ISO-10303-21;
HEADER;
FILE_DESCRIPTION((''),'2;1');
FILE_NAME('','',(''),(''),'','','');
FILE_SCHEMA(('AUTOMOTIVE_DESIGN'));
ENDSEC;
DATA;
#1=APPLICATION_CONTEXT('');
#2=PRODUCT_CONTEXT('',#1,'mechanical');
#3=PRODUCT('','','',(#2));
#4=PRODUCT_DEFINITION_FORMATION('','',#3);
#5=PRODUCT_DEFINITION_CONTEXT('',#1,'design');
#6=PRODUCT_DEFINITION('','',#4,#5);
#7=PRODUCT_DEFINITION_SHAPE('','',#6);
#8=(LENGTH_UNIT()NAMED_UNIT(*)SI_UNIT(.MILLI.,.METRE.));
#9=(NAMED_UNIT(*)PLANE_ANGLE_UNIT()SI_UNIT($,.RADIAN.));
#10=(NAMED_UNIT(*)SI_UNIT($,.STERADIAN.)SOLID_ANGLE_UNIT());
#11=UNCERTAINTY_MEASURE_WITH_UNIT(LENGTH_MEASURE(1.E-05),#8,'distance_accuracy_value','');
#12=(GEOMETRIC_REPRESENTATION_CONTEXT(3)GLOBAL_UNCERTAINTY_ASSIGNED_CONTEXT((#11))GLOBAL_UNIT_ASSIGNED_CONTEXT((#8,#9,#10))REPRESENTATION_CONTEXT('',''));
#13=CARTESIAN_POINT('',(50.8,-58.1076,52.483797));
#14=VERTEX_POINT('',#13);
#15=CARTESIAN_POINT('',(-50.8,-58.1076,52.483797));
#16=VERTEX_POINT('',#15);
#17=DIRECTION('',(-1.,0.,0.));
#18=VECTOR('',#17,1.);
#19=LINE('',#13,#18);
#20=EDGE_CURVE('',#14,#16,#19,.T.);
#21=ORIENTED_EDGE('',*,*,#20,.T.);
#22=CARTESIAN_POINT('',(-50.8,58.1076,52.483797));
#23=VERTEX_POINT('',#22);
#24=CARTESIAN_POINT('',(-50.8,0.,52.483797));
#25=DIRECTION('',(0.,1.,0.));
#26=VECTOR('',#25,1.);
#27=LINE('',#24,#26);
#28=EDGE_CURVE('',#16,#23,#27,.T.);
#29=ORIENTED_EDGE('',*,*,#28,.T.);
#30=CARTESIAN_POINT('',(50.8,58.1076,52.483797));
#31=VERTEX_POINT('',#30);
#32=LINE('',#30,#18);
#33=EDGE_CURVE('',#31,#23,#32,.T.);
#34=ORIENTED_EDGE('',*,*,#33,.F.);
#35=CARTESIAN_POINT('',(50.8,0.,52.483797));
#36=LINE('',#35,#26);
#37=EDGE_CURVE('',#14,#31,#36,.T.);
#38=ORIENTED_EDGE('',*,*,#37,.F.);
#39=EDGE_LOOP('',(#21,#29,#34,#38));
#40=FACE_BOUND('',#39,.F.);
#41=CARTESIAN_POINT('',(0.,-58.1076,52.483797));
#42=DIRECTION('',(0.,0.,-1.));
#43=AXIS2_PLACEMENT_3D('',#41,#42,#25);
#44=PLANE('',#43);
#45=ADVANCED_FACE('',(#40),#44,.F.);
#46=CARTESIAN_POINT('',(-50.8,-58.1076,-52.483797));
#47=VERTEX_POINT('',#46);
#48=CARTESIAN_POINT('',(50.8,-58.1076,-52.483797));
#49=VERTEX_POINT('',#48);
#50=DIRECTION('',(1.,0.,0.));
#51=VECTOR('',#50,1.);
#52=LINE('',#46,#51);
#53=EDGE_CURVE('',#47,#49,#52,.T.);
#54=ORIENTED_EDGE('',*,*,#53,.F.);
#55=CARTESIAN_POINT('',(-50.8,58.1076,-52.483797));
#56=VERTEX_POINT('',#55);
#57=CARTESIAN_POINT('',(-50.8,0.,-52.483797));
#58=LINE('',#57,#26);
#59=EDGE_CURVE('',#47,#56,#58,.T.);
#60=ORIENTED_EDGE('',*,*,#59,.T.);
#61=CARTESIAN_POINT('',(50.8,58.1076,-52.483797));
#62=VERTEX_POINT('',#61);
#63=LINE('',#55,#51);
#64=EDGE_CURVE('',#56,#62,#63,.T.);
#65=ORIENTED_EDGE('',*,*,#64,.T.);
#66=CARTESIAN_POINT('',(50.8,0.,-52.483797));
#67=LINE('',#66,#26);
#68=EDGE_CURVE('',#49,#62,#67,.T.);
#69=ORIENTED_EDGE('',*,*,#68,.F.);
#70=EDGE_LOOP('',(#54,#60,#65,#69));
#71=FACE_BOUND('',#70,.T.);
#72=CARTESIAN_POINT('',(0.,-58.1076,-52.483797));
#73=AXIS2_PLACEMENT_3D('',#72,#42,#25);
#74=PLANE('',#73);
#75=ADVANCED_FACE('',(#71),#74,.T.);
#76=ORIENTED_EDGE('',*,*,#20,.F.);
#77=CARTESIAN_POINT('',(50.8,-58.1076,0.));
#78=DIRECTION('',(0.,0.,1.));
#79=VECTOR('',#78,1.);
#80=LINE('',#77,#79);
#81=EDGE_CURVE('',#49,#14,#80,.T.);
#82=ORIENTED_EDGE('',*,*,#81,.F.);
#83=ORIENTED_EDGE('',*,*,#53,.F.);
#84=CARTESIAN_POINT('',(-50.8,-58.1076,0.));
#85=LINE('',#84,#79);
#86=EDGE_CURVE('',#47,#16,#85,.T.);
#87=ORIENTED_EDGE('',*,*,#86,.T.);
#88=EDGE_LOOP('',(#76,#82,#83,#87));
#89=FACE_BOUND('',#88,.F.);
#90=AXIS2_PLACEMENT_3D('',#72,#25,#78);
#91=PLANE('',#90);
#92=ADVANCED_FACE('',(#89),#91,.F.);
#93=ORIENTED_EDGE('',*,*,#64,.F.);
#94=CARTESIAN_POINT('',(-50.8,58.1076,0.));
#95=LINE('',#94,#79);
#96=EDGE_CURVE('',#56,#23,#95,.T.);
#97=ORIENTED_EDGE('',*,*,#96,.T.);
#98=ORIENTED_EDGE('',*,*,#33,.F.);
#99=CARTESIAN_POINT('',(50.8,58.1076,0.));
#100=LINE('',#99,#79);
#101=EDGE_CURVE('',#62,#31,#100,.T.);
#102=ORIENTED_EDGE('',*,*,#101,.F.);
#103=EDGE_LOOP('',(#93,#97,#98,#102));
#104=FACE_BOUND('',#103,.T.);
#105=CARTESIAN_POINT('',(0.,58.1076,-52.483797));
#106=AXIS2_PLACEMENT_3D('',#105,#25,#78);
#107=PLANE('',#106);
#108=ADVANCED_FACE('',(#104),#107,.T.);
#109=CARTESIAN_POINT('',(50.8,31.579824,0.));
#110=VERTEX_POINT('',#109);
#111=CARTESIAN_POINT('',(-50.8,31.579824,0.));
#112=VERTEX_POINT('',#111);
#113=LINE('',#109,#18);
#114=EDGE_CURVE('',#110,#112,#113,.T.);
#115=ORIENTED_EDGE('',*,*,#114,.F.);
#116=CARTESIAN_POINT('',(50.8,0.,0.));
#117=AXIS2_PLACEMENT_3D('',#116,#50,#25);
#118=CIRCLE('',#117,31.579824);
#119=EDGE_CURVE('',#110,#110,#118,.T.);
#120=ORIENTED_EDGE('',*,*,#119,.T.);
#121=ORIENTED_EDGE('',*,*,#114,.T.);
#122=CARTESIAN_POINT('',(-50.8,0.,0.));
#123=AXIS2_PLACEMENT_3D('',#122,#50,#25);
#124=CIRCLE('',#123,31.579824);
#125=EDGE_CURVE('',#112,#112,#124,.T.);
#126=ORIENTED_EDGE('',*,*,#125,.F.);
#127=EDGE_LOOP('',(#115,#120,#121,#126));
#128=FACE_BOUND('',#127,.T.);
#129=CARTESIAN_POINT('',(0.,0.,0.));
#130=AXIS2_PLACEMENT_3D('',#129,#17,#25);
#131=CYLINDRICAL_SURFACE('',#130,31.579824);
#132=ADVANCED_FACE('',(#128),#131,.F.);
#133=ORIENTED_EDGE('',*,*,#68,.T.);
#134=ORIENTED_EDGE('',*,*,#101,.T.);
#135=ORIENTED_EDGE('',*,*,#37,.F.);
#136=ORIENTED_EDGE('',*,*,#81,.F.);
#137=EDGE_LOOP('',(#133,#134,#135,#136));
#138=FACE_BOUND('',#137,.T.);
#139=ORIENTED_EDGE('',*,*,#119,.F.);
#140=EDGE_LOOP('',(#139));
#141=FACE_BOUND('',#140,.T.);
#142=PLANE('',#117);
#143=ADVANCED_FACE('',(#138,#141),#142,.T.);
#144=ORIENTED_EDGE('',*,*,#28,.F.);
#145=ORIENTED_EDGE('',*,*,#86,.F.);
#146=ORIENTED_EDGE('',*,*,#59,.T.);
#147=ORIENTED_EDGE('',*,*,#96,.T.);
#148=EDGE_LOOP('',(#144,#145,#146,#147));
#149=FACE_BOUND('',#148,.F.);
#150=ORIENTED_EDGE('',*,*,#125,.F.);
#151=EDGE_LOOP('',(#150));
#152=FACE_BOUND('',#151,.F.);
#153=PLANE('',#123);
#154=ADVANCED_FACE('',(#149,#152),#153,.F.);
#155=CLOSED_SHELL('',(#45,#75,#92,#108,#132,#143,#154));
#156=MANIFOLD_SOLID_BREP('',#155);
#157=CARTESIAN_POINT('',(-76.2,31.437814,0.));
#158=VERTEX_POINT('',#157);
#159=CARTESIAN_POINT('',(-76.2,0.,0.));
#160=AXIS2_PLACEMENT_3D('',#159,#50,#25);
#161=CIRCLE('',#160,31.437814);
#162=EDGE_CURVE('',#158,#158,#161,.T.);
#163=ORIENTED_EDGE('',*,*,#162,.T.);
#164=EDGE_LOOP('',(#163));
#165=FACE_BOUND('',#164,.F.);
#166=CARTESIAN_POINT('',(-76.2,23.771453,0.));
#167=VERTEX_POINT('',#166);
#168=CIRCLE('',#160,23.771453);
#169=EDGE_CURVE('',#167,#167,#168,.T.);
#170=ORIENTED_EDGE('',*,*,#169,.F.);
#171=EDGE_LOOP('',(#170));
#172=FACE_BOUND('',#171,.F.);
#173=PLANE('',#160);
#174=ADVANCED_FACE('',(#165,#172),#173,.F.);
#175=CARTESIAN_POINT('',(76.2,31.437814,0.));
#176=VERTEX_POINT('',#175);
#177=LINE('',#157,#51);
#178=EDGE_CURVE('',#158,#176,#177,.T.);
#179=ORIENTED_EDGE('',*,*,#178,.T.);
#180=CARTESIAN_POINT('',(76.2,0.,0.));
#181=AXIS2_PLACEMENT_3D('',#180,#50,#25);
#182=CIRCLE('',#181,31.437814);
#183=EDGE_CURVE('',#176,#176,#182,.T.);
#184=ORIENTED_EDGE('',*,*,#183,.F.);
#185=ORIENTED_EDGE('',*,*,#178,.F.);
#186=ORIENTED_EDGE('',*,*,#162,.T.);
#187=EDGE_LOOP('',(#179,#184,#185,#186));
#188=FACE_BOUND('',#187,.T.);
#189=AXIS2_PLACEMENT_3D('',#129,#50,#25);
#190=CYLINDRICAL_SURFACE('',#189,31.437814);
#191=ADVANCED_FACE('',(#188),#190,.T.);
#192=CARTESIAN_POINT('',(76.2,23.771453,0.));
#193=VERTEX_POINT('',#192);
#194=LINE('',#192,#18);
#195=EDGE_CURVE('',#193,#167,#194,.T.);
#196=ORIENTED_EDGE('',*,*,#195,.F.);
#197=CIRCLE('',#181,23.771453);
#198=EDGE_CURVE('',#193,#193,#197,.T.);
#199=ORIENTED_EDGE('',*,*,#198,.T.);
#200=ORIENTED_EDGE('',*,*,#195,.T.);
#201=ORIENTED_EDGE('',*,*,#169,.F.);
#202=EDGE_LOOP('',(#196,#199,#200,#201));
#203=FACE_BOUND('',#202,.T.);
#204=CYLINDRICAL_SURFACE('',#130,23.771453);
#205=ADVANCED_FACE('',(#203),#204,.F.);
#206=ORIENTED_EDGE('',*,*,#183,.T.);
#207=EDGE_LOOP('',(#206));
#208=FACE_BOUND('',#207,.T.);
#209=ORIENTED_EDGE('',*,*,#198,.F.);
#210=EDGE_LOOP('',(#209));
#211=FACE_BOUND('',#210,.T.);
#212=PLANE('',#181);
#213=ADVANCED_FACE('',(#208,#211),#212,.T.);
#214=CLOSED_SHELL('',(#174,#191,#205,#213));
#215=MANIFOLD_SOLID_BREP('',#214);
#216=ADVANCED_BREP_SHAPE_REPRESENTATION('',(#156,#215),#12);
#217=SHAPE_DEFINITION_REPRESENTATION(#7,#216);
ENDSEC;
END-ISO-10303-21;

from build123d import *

# Parameters (mm, degrees)
F0_W     = 116.2151992321
F0_H     = 104.9675941467
F0_R     = 31.5798235418
F1_DEPTH = 50.8
F2_R     = 31.4378135925
F2_R_2   = 23.771453385
F3_DEPTH = 76.2


# Not quite as in the source:
# - a feature of the source that left no trace in its solid (it failed there, or was rolled back) is left out


with BuildPart() as f1:
    # F0 (on Right) → F1 (new body, symmetric)
    with BuildSketch(Plane.YZ):
        Rectangle(F0_W, F0_H)
        Circle(F0_R, mode=Mode.SUBTRACT)
    extrude(amount=F1_DEPTH, both=True)


with BuildPart() as f3:
    # F2 (on Right) → F3 (new body, symmetric)
    with BuildSketch(Plane.YZ):
        Circle(F2_R)
        Circle(F2_R_2, mode=Mode.SUBTRACT)
    extrude(amount=F3_DEPTH, both=True)


solid = Compound([f1.part, f3.part])
